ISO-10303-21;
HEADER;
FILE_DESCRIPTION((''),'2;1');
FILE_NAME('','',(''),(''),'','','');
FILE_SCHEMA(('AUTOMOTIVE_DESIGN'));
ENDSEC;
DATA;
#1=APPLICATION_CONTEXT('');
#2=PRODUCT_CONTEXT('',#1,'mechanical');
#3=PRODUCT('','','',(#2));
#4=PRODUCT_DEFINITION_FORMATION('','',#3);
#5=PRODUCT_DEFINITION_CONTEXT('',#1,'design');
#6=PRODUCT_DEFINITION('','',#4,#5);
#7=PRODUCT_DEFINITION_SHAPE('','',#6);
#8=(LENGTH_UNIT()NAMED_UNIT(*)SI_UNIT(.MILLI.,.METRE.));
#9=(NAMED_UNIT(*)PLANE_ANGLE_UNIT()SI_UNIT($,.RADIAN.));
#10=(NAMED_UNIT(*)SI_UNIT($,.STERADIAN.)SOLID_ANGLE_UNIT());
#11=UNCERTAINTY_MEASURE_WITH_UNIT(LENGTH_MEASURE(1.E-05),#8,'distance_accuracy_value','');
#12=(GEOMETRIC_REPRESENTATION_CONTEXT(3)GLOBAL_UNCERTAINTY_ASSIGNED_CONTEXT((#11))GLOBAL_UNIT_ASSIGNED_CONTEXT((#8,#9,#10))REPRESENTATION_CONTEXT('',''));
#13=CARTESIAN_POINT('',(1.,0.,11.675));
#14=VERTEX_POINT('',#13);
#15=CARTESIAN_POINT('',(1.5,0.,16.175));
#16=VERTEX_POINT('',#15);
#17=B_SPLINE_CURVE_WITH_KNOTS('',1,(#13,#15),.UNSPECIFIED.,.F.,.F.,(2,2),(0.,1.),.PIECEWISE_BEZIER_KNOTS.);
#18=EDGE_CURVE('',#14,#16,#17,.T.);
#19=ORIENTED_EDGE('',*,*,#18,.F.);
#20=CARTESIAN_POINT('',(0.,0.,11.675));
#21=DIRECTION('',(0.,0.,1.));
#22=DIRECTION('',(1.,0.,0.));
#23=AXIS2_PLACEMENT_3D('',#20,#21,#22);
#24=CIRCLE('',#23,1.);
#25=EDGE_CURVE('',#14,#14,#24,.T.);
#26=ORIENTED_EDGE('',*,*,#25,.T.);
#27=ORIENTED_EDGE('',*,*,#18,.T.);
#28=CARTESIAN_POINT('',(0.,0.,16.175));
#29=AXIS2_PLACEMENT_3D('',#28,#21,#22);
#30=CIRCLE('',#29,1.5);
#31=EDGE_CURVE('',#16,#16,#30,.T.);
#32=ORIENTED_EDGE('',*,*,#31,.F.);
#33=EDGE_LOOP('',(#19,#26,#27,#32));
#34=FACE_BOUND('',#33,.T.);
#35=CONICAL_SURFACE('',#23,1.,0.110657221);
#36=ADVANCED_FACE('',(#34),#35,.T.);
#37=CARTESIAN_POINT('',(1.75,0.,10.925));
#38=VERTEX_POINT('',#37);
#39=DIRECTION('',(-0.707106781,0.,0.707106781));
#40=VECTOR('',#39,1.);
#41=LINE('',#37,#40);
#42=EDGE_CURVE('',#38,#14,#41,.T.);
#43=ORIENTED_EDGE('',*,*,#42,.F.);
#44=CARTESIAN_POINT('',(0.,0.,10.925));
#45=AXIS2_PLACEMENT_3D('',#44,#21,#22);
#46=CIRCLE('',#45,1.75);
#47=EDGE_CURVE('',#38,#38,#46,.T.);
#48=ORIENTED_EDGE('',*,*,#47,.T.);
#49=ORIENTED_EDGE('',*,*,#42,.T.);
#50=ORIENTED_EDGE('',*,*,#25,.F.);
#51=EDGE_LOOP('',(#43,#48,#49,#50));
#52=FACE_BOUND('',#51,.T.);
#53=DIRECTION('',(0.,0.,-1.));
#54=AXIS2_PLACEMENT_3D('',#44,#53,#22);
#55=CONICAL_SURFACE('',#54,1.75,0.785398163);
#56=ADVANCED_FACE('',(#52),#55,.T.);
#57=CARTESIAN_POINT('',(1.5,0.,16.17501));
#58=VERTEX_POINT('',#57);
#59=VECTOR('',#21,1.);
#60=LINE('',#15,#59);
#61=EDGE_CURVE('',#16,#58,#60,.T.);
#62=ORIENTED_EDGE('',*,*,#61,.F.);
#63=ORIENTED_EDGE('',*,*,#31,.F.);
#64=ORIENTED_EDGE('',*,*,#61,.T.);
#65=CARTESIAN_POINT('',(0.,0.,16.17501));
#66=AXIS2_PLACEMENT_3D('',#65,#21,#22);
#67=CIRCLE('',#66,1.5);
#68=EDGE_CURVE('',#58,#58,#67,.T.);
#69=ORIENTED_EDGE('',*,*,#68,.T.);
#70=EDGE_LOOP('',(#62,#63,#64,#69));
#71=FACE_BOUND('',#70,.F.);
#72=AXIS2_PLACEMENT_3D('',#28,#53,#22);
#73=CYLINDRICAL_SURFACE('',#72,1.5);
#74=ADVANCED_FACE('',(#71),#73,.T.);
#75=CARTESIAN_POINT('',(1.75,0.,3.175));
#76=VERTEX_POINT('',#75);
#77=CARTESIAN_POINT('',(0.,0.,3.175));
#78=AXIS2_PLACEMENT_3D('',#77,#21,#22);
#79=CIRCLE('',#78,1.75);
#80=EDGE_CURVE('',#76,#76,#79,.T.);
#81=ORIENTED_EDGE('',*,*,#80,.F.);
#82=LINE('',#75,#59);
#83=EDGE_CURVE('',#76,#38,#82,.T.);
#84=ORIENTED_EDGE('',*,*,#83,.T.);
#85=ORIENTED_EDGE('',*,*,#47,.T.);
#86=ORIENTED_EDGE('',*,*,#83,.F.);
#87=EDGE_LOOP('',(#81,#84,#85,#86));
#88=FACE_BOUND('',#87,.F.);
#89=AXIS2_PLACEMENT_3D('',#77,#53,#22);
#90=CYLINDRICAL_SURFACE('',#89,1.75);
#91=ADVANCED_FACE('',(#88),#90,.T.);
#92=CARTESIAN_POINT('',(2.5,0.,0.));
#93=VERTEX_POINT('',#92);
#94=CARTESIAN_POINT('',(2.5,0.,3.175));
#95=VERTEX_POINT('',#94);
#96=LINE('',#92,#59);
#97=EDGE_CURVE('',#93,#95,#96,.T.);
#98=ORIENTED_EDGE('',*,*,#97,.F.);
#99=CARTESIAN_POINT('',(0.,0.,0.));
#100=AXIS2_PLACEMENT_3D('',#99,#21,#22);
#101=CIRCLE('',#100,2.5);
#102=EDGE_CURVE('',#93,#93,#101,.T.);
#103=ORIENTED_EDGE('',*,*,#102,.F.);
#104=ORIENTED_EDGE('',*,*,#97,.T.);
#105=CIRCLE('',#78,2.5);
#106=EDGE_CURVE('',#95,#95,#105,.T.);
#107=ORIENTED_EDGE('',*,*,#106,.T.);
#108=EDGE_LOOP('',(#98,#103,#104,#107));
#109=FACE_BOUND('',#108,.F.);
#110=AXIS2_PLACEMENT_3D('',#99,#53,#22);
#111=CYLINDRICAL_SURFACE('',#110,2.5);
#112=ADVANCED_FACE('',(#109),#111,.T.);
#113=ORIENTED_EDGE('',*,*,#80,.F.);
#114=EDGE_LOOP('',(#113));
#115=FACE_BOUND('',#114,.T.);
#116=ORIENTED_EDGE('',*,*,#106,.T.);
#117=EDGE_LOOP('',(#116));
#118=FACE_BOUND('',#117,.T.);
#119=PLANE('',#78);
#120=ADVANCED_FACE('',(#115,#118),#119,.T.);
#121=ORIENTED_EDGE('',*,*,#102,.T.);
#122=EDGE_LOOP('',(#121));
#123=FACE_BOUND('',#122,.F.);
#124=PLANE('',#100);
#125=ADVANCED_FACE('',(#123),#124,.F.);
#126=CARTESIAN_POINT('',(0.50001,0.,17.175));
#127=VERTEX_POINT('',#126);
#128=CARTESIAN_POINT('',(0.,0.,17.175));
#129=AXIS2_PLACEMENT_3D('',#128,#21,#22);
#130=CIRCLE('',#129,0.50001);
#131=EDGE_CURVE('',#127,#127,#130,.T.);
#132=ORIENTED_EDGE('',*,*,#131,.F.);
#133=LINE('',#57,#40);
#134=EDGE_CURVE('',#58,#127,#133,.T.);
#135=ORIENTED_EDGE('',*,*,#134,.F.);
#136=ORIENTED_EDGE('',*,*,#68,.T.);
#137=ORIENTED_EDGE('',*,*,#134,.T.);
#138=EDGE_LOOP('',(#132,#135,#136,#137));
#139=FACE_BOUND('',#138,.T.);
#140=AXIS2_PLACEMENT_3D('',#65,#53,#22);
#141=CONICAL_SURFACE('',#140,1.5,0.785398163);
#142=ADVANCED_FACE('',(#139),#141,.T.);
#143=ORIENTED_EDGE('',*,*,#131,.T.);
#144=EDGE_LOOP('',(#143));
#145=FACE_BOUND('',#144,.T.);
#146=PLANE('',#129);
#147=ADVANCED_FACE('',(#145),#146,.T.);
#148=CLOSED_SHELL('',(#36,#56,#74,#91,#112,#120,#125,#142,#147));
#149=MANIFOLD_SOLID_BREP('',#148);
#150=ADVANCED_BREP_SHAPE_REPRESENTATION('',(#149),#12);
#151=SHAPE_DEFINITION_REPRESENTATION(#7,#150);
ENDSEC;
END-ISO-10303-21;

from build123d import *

# Parameters (mm, degrees)
F0_R      = 2.5
F1_DEPTH  = 3.175
F2_R      = 1.75
F3_DEPTH  = 8.5
F4_SIZE   = 0.75
F5_R      = 1
F7_R      = 1.5
F9_R      = 1.5
F10_DEPTH = 1
F11_SIZE  = 0.99999


# Not quite as in the source:
# - a fillet or chamfer is up to 0.001 mm smaller than in the source, because OpenCascade refuses the exact size


with BuildPart() as f1:
    # F0 (on Top) → F1 (new body)
    with BuildSketch(Plane.XY):
        Circle(F0_R)
    extrude(amount=F1_DEPTH)

    # F2 (on face) → F3 (join)
    with BuildSketch(Plane.XY.offset(3.175)):
        Circle(F2_R)
    extrude(amount=F3_DEPTH)

    # F4
    f4_edges = [f1.edges().sort_by_distance(p)[0] for p in [
        (-1.75, 0, 11.675),
    ]]
    chamfer(f4_edges, length=F4_SIZE)

    # F5 (on face) → F8 section 0
    with BuildSketch(Plane.XY.offset(11.675)):
        Circle(F5_R)
    # F7 (on offset) → F8 section 1
    with BuildSketch(Plane.XY.offset(16.175)):
        Circle(F7_R)
    loft()

    # F9 (on face) → F10 (join)
    with BuildSketch(Plane.XY.offset(16.175)):
        Circle(F9_R)
    extrude(amount=F10_DEPTH)

    # F11 (size 1 in the source; OpenCascade refuses exactly that, so slightly less here)
    f11_edges = [f1.edges().sort_by_distance(p)[0] for p in [
        (-1.5, 0, 17.175),
    ]]
    chamfer(f11_edges, length=F11_SIZE)


solid = f1.part
